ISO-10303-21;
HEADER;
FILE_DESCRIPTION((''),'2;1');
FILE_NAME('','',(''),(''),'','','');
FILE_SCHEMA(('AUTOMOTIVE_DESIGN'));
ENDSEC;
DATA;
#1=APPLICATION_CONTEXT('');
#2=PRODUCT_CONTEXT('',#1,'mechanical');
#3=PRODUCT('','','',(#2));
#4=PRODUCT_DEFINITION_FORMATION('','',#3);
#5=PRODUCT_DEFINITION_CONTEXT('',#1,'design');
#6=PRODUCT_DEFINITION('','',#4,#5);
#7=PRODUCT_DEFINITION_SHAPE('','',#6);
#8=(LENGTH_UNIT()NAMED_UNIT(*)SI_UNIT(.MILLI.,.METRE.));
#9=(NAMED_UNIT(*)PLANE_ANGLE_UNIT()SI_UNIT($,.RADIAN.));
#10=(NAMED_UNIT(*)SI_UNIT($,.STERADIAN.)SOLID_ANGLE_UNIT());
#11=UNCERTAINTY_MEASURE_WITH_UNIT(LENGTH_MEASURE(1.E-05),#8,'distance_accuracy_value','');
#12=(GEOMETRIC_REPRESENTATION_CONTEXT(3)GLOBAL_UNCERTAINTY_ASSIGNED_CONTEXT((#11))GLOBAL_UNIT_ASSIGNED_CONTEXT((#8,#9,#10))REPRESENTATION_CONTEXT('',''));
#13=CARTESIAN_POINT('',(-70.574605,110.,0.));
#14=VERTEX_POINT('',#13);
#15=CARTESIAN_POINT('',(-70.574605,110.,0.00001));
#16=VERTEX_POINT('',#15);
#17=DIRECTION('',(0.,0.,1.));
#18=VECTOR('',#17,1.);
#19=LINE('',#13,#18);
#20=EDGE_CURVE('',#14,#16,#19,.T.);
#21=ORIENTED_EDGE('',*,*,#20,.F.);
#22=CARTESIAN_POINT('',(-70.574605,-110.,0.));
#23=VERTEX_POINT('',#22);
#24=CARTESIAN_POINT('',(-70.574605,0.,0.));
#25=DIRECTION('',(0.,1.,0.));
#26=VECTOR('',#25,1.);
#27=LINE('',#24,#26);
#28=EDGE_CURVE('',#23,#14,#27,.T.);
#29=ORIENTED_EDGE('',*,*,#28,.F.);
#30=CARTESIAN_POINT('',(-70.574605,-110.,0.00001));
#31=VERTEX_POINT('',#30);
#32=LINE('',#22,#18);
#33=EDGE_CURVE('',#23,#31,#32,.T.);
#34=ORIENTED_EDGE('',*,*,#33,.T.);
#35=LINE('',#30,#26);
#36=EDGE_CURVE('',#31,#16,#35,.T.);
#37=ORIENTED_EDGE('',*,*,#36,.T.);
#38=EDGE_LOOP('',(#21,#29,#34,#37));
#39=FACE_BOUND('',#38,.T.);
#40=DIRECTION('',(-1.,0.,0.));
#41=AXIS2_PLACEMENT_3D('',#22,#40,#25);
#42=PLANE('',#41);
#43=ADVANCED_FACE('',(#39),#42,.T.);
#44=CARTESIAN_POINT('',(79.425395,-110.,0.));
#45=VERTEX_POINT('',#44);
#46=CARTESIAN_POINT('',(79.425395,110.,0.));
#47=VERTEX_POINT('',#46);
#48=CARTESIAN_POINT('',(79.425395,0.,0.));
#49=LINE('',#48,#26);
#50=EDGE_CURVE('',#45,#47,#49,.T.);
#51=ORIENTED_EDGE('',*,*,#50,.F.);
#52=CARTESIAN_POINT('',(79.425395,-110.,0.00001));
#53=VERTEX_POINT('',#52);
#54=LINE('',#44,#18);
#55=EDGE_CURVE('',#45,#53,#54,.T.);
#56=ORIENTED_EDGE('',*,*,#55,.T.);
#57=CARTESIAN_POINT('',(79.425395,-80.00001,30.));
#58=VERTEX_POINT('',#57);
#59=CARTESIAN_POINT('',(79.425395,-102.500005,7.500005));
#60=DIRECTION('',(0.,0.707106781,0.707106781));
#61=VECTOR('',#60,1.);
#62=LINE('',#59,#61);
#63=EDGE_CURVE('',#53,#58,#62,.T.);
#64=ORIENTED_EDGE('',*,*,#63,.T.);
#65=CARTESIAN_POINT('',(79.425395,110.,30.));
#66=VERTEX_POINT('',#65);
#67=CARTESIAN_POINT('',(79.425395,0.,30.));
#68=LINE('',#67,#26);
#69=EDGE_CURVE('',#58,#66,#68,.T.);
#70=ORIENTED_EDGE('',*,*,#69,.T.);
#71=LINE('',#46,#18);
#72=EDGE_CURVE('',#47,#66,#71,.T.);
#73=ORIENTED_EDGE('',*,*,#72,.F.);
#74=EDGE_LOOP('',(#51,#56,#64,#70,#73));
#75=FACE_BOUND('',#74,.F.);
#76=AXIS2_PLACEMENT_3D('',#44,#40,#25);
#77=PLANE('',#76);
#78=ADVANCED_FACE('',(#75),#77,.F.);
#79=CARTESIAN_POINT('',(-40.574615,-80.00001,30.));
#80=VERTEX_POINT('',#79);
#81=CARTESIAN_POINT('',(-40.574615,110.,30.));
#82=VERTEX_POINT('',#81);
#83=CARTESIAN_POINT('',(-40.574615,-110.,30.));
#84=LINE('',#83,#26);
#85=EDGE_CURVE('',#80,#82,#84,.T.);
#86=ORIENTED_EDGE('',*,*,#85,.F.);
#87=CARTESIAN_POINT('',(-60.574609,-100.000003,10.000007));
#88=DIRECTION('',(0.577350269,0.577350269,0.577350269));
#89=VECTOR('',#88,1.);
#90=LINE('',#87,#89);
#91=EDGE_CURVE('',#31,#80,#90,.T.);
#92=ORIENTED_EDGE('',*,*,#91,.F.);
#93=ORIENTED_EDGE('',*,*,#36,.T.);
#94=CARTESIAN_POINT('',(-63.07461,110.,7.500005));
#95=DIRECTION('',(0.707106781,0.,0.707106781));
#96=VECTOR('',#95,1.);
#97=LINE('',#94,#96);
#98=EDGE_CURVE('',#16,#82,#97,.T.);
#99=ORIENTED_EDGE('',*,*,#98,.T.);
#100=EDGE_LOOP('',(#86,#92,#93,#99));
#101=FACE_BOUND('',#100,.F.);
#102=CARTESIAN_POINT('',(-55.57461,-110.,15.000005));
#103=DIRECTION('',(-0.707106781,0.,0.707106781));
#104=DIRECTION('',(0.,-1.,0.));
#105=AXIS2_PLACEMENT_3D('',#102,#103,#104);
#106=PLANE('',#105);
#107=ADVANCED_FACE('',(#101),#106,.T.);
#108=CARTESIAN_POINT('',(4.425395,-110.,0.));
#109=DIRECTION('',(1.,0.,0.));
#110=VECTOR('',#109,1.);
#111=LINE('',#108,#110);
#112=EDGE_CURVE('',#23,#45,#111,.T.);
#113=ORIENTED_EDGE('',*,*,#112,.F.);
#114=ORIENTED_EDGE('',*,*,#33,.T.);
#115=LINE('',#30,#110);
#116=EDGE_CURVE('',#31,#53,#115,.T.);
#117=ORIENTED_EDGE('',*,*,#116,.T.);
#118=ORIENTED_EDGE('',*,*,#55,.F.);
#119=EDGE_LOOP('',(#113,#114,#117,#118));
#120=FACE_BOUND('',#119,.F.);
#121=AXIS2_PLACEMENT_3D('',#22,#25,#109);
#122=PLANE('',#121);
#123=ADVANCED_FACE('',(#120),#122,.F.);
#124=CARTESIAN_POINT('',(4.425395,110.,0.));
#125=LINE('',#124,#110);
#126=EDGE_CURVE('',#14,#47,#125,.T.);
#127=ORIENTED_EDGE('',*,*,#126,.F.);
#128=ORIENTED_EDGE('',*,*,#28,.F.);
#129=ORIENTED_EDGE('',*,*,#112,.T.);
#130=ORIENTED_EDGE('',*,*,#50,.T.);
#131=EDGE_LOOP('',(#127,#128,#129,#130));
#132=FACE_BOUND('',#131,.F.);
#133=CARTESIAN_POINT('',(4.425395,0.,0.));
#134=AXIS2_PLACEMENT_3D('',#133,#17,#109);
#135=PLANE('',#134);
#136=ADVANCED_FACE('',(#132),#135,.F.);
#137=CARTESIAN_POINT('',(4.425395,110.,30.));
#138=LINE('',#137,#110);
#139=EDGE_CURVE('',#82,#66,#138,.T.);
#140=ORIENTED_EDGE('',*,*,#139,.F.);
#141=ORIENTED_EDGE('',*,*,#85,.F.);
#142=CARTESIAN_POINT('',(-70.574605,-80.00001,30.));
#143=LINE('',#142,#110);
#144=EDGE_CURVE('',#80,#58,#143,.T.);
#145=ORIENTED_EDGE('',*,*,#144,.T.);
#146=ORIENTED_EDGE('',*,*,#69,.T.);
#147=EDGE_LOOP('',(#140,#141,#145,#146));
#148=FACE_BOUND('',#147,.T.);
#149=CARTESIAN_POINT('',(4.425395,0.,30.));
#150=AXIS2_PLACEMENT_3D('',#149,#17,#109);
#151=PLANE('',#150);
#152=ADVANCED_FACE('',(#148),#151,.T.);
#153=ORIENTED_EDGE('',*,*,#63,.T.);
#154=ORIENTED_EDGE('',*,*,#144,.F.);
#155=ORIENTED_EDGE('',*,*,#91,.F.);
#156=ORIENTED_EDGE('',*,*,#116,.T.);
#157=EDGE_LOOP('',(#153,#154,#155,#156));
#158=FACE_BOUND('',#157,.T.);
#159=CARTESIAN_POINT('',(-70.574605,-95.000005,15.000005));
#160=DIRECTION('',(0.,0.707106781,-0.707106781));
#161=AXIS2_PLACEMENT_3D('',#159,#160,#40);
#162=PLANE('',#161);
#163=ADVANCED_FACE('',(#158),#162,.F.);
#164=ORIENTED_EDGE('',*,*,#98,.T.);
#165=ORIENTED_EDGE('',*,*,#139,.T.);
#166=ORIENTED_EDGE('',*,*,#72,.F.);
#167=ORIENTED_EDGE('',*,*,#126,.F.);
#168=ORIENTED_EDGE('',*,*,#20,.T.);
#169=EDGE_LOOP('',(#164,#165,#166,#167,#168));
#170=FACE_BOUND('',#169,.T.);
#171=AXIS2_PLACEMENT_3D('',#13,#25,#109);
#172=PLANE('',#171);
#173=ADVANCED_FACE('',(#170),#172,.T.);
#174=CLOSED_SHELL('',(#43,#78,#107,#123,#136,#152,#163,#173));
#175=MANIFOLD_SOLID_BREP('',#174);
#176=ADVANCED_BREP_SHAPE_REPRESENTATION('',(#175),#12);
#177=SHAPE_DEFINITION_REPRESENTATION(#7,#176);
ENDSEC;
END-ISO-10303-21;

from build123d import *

# Parameters (mm, degrees)
F0_W     = 150
F0_H     = 220
F1_DEPTH = 30
F2_SIZE  = 29.99999


# Not quite as in the source:
# - a fillet or chamfer is up to 0.001 mm smaller than in the source, because OpenCascade refuses the exact size


with BuildPart() as f1:
    # F0 (on Top) → F1 (new body)
    with BuildSketch(Plane.XY):
        with Locations((4.4253946793, 0)):
            Rectangle(F0_W, F0_H)
    extrude(amount=F1_DEPTH)

    # F2 (size 30 in the source; OpenCascade refuses exactly that, so slightly less here)
    f2_edges = [f1.edges().sort_by_distance(p)[0] for p in [
        (4.425395, -110, 30),
        (-70.574605, 0, 30),
    ]]
    chamfer(f2_edges, length=F2_SIZE)


solid = f1.part
